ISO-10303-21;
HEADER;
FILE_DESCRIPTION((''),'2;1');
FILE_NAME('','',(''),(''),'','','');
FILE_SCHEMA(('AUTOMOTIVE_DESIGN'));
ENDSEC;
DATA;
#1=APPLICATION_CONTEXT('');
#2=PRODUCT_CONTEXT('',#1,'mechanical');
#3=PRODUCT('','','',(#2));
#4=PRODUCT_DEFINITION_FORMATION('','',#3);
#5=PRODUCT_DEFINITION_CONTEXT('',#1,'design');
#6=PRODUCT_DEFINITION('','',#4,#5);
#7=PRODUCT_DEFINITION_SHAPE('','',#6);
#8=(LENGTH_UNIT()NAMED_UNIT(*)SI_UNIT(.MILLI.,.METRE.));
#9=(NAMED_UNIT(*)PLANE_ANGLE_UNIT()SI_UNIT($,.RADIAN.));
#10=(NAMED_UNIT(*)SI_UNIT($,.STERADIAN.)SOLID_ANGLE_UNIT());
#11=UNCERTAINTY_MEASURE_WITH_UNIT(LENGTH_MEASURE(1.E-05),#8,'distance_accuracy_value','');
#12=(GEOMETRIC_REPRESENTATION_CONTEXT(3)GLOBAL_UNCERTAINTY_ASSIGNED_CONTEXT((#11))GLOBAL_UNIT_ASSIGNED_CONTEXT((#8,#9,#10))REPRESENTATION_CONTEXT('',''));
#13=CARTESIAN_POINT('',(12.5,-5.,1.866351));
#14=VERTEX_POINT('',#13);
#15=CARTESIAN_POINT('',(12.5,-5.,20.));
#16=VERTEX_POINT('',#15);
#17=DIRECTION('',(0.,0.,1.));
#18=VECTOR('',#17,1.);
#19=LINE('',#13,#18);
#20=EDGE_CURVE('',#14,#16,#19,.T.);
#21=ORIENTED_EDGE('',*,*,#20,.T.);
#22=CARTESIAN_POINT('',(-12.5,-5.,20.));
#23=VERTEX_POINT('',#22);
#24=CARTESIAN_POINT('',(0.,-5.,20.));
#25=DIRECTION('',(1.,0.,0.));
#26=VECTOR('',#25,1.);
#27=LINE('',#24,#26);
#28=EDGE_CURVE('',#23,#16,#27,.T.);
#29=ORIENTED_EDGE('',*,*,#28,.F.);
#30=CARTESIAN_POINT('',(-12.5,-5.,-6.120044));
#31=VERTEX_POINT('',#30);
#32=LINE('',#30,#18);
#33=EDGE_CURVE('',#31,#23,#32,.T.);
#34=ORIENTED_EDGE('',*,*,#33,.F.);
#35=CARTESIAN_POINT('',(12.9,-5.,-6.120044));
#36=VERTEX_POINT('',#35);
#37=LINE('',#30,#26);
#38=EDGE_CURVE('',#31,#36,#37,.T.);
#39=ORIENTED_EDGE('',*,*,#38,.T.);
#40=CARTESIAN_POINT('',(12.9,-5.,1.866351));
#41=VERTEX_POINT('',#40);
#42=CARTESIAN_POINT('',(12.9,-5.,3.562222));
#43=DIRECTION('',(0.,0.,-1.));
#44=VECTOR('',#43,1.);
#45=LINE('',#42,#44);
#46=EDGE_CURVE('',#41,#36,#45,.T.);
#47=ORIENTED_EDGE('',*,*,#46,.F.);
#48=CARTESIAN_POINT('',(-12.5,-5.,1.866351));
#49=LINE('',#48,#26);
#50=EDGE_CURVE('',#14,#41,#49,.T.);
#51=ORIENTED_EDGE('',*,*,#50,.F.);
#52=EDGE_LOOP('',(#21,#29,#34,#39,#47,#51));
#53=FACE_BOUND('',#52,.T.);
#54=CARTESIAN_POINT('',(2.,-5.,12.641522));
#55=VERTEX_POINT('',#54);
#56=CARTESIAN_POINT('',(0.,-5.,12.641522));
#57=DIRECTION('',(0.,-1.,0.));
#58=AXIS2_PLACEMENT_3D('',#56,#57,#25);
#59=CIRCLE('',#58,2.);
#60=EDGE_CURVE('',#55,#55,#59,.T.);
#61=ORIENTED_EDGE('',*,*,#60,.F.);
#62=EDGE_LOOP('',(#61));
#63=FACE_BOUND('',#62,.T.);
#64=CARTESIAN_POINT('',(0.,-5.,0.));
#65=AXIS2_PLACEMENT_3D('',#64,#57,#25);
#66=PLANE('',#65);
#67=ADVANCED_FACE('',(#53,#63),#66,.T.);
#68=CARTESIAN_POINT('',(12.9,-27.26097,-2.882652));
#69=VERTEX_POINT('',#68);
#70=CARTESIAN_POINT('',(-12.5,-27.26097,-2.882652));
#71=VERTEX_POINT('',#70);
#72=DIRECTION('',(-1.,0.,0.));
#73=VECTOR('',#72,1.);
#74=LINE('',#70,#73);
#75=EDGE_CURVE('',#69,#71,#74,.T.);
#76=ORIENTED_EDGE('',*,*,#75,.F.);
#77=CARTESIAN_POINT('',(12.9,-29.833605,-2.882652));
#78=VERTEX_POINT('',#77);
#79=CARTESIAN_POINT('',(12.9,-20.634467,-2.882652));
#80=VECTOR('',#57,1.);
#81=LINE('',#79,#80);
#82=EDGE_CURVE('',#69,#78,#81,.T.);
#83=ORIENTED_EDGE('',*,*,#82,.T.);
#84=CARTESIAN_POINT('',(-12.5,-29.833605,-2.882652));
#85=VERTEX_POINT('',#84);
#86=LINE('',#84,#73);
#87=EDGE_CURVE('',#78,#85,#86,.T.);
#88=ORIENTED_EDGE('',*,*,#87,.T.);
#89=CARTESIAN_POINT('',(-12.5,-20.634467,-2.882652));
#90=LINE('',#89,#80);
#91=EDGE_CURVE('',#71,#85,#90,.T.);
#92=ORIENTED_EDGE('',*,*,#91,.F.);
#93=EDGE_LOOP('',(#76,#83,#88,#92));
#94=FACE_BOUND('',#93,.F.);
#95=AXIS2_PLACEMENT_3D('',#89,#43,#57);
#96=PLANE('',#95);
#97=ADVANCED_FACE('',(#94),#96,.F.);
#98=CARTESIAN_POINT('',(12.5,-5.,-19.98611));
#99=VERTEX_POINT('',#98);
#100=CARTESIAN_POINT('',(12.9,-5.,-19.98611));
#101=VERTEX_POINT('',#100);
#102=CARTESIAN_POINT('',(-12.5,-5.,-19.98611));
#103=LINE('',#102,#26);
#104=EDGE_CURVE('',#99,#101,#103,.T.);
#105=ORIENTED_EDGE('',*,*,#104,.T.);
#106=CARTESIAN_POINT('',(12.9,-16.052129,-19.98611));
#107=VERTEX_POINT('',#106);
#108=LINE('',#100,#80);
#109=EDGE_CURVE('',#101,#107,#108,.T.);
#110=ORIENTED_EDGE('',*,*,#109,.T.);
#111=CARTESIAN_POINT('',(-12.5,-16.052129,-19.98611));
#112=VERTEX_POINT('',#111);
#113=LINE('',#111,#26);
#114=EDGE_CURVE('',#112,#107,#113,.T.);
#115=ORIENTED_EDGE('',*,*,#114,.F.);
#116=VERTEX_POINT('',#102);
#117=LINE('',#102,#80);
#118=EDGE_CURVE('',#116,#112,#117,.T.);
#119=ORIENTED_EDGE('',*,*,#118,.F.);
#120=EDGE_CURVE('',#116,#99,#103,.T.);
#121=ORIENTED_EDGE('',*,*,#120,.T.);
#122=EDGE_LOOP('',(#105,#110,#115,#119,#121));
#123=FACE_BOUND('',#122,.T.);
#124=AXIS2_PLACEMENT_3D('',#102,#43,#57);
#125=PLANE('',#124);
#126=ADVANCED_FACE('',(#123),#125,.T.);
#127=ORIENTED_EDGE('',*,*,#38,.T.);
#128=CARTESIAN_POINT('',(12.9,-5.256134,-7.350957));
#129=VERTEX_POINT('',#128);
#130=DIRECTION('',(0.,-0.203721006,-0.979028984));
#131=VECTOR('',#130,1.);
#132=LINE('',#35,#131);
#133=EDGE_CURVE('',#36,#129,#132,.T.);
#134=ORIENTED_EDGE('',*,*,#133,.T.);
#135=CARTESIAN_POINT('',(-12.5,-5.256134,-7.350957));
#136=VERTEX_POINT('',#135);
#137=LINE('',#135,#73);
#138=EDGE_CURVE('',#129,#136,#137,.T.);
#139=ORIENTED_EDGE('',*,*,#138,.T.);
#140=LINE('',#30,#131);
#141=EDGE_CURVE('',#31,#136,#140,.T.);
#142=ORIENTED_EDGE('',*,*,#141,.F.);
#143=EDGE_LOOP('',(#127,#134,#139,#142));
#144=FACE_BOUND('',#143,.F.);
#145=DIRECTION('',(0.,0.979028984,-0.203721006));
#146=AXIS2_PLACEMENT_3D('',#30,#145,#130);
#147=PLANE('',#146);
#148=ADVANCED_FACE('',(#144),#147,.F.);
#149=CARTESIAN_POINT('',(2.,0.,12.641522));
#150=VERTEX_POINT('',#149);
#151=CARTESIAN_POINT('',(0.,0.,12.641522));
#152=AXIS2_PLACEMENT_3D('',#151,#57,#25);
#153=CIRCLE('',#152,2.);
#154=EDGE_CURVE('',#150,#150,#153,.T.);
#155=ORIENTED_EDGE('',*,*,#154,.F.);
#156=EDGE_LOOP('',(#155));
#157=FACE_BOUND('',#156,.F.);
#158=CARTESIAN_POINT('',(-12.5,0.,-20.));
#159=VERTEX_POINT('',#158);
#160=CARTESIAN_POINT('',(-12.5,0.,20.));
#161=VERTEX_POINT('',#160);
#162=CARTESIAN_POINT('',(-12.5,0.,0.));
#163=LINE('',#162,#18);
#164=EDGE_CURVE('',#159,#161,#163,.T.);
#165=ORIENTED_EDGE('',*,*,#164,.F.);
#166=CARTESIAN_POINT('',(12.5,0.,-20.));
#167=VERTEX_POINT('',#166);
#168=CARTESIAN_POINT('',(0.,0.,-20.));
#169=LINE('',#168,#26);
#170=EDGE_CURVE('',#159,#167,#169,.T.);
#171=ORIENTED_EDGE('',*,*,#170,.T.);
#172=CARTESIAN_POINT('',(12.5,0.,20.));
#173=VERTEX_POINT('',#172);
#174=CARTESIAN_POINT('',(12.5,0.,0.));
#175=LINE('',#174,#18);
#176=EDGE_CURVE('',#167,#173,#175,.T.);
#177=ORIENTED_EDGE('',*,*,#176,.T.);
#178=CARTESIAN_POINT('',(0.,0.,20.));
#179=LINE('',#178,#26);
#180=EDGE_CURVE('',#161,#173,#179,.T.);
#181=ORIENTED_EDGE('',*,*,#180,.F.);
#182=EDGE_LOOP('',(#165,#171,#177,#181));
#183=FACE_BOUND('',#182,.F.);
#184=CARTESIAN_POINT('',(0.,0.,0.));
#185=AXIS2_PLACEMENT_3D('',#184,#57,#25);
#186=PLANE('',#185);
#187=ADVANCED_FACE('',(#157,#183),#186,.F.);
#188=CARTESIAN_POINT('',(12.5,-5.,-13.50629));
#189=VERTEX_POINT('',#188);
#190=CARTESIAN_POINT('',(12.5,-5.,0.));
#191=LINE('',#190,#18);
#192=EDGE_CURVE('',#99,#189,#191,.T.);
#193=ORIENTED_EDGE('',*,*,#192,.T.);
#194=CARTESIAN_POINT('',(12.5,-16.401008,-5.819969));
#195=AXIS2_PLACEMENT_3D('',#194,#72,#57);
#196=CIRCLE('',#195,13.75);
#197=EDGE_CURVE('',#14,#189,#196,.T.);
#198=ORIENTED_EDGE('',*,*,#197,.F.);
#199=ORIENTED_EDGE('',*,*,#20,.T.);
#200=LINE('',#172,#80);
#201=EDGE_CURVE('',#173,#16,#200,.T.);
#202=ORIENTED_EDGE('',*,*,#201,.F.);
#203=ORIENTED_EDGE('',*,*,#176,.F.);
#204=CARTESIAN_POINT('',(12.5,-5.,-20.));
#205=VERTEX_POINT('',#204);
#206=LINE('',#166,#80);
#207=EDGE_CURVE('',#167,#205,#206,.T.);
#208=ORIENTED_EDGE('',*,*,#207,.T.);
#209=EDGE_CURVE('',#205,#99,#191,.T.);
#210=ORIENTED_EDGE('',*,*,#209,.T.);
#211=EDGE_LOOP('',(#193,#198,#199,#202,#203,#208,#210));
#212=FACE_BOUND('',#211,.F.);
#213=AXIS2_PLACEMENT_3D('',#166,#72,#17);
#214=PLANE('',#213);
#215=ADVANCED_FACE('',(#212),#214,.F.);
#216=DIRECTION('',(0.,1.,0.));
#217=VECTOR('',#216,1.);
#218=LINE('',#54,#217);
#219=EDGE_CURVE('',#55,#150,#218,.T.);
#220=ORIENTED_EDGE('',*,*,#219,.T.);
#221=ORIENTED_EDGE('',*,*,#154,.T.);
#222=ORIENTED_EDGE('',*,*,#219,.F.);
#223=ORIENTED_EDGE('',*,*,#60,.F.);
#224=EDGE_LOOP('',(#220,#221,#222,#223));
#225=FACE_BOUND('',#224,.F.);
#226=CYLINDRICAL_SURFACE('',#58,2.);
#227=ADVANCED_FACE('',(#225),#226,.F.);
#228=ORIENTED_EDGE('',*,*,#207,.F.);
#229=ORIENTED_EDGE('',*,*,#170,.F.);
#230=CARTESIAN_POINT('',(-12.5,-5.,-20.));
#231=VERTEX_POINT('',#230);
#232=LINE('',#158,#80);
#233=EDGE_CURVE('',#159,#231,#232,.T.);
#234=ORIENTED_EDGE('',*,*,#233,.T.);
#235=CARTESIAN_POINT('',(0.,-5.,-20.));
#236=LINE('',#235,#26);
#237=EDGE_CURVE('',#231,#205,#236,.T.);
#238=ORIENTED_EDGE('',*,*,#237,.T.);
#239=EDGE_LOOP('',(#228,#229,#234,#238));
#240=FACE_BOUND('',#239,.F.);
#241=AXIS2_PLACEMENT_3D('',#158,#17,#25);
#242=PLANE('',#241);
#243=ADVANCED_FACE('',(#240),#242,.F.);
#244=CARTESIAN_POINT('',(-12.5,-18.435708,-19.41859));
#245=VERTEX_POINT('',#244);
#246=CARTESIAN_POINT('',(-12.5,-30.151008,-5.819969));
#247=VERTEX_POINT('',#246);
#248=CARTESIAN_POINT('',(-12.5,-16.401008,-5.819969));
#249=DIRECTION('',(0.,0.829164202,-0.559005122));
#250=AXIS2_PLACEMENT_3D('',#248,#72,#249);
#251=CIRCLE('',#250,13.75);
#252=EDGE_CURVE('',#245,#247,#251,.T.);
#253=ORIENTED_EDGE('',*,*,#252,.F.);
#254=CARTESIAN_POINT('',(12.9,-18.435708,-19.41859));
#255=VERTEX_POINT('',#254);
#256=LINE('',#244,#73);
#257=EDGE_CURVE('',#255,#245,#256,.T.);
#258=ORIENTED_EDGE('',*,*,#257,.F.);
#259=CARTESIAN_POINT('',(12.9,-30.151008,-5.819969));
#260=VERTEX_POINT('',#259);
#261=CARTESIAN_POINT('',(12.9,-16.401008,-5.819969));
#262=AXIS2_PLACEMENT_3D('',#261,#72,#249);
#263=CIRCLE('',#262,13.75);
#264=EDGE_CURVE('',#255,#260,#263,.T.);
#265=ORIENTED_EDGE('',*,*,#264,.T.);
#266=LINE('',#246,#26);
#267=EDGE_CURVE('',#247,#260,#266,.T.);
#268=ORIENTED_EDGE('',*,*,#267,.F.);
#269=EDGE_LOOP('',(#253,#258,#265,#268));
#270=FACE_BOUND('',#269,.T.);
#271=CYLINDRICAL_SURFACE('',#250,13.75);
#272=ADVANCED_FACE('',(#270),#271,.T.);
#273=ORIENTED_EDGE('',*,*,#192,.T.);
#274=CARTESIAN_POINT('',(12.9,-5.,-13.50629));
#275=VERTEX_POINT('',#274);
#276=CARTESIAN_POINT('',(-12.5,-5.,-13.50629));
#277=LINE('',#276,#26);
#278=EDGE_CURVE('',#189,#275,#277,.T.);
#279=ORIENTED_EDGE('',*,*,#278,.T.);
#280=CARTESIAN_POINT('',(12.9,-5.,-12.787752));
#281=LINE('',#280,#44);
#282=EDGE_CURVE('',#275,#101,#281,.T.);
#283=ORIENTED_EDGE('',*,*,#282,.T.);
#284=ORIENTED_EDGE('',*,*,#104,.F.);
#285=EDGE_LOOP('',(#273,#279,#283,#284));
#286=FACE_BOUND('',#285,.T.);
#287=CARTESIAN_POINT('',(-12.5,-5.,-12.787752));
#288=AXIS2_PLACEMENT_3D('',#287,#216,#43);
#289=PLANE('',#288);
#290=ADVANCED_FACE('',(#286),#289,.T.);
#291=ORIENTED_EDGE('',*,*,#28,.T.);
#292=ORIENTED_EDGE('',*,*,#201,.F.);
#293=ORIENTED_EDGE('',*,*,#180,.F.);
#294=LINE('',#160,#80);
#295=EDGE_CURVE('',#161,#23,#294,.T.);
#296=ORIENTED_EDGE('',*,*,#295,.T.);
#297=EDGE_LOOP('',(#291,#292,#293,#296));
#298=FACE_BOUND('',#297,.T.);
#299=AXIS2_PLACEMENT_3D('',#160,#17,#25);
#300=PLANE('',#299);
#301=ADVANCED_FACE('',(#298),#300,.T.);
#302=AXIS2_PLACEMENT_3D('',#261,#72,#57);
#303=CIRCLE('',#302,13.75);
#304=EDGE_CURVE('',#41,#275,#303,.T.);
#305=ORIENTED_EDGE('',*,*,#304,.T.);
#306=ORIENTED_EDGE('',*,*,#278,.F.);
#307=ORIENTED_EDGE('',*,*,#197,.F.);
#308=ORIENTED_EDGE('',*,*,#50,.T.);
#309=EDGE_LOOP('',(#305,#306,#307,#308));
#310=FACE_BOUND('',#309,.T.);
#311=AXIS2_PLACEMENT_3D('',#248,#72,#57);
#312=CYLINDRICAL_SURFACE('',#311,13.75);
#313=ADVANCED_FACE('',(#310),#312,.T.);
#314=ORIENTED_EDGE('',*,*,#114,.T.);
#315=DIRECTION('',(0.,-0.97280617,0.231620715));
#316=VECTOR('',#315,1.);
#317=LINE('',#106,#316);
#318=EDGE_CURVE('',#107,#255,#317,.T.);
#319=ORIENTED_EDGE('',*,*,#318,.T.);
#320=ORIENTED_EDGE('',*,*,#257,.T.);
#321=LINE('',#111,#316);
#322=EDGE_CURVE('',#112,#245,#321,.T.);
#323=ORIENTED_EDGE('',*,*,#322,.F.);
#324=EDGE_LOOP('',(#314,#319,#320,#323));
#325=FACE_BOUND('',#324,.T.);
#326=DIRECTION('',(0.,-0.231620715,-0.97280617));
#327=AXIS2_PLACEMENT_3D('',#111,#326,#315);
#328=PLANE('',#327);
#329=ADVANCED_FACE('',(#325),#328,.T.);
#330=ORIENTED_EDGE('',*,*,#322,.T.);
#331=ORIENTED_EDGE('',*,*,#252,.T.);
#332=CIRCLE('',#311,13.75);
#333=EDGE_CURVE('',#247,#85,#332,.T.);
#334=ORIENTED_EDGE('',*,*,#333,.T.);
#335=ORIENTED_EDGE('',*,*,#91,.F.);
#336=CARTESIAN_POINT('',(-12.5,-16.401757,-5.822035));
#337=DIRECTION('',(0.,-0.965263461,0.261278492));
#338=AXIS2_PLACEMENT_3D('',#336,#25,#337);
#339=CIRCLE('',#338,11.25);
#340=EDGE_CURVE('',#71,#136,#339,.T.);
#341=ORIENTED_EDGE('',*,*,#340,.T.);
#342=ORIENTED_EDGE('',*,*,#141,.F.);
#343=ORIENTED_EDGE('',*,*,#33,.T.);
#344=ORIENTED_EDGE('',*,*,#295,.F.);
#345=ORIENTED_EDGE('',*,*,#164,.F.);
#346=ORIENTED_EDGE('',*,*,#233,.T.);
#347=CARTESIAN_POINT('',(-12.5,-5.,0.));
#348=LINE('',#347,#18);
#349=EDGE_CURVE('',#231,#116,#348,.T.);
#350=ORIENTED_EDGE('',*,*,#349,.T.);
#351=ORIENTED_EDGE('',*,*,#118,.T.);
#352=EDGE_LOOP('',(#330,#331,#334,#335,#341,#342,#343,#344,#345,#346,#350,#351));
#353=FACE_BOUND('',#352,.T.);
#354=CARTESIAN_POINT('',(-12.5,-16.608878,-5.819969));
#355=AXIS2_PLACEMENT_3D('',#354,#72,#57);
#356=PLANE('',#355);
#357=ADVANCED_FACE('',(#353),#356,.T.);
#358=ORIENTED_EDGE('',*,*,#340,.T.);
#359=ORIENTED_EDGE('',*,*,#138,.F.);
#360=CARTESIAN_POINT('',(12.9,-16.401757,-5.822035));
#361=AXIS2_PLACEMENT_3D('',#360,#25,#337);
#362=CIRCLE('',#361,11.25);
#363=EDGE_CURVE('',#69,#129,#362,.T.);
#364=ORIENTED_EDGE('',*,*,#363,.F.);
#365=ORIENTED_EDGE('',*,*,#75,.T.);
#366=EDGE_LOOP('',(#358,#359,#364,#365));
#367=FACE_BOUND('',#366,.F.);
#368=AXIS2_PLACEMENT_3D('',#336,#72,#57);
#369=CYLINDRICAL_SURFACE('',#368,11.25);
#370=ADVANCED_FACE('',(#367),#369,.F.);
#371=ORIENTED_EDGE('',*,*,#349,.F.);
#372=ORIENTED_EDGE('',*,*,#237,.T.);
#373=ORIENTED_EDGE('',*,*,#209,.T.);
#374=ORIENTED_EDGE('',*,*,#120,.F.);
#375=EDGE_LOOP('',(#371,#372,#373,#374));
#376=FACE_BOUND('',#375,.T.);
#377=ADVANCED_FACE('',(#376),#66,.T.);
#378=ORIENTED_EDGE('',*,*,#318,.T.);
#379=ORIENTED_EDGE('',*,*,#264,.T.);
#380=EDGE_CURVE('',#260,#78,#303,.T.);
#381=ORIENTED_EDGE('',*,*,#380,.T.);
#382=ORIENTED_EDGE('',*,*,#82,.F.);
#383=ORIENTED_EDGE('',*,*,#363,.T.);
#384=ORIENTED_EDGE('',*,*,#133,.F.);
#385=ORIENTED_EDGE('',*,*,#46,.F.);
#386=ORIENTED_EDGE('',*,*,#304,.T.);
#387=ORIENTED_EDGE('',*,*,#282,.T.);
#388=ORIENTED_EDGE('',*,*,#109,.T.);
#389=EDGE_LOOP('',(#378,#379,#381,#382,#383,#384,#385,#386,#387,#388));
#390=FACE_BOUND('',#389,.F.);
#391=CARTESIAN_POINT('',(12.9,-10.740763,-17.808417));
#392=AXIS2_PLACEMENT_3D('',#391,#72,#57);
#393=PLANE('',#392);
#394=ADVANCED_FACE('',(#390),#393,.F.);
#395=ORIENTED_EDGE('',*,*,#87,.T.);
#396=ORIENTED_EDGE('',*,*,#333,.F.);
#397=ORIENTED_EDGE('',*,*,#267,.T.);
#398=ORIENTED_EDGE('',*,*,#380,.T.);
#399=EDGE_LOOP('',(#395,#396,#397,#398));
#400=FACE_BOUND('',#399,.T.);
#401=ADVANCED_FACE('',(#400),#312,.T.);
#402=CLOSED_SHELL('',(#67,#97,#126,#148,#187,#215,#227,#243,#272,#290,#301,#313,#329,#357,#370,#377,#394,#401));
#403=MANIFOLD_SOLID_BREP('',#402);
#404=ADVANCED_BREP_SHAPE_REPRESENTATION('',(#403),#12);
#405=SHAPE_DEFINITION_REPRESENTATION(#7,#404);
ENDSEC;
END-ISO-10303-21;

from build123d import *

# Parameters (mm, degrees)
F0_W      = 25
F0_H      = 40
F1_DEPTH  = 5
F6_DEPTH  = 25.4
F3_R      = 13.75
F7_DEPTH  = 25.4
F9_DEPTH  = 25.4
F2_R      = 11.25
F10_DEPTH = 25.4
F12_DEPTH = 25.4
F13_R     = 2
F14_DEPTH = 25.4


# Not quite as in the source:
# - a feature names something its author has since deleted; it is built from what else it names


with BuildPart() as f1:
    # F0 (on Front) → F1 (new body)
    with BuildSketch(Plane.XZ):
        Rectangle(F0_W, F0_H)
    extrude(amount=F1_DEPTH)

    # F3 (on face) → F6 (join)
    with BuildSketch(Plane(origin=(-12.5, 0, 0), x_dir=(0, -1, 0), z_dir=(-1, 0, 0))):
        with BuildLine():
            ThreePointArc((5, -13.5062897776), (20.4196296212, -18.9696149078), (30.1510077715, -5.8199693449))
            ThreePointArc((30.1510077715, -5.8199693449), (20.4196296212, 7.329676218), (5, 1.8663510878))
            Line((5, 1.8663510878), (5, -13.5062897776))
        make_face()
    extrude(amount=-F6_DEPTH)

    # F3 (on face) → F7 (join)
    with BuildSketch(Plane(origin=(-12.5, 0, 0), x_dir=(0, -1, 0), z_dir=(-1, 0, 0))):
        with Locations((16.4010077715, -5.8199693449)):
            Circle(F3_R)
    extrude(amount=-F7_DEPTH)

    # F8 (on face) → F9 (join)
    with BuildSketch(Plane(origin=(-12.5, 0, 0), x_dir=(0, -1, 0), z_dir=(-1, 0, 0))):
        Polygon((5, -12.7877519428), (5, -19.9861098081), (16.0521287471, -19.9861098081), (19.5415690541, -19.1552899778), (7.0377378725, -15.2296693996), align=None)
    extrude(amount=-F9_DEPTH)

    # F2 (on face) → F10 (cut)
    with BuildSketch(Plane(origin=(-12.5, 0, 0), x_dir=(0, -1, 0), z_dir=(-1, 0, 0))):
        with Locations((16.4017565548, -5.8220350184)):
            Circle(F2_R)
    extrude(amount=-F10_DEPTH, mode=Mode.SUBTRACT)

    # F11 (on face) → F12 (cut)
    with BuildSketch(Plane(origin=(-12.5, 0, 0), x_dir=(0, -1, 0), z_dir=(-1, 0, 0))):
        Polygon((12.1690463275, 13.4603166953), (5, 3.5622220363), (5, -6.1200439696), (5.3498325869, -7.8012463637), (19.8114402592, -7.8012463637), (20.6344667822, -2.8826519847), (33.6853265762, -2.8826519847), (32.509572804, 10.7560846955), align=None)
    extrude(amount=-F12_DEPTH, mode=Mode.SUBTRACT)

    # F13 (on face) → F14 (cut)
    with BuildSketch(Plane.XZ.offset(5)):
        with Locations((0, 12.6415221021)):
            Circle(F13_R)
    extrude(amount=-F14_DEPTH, mode=Mode.SUBTRACT)


solid = f1.part
